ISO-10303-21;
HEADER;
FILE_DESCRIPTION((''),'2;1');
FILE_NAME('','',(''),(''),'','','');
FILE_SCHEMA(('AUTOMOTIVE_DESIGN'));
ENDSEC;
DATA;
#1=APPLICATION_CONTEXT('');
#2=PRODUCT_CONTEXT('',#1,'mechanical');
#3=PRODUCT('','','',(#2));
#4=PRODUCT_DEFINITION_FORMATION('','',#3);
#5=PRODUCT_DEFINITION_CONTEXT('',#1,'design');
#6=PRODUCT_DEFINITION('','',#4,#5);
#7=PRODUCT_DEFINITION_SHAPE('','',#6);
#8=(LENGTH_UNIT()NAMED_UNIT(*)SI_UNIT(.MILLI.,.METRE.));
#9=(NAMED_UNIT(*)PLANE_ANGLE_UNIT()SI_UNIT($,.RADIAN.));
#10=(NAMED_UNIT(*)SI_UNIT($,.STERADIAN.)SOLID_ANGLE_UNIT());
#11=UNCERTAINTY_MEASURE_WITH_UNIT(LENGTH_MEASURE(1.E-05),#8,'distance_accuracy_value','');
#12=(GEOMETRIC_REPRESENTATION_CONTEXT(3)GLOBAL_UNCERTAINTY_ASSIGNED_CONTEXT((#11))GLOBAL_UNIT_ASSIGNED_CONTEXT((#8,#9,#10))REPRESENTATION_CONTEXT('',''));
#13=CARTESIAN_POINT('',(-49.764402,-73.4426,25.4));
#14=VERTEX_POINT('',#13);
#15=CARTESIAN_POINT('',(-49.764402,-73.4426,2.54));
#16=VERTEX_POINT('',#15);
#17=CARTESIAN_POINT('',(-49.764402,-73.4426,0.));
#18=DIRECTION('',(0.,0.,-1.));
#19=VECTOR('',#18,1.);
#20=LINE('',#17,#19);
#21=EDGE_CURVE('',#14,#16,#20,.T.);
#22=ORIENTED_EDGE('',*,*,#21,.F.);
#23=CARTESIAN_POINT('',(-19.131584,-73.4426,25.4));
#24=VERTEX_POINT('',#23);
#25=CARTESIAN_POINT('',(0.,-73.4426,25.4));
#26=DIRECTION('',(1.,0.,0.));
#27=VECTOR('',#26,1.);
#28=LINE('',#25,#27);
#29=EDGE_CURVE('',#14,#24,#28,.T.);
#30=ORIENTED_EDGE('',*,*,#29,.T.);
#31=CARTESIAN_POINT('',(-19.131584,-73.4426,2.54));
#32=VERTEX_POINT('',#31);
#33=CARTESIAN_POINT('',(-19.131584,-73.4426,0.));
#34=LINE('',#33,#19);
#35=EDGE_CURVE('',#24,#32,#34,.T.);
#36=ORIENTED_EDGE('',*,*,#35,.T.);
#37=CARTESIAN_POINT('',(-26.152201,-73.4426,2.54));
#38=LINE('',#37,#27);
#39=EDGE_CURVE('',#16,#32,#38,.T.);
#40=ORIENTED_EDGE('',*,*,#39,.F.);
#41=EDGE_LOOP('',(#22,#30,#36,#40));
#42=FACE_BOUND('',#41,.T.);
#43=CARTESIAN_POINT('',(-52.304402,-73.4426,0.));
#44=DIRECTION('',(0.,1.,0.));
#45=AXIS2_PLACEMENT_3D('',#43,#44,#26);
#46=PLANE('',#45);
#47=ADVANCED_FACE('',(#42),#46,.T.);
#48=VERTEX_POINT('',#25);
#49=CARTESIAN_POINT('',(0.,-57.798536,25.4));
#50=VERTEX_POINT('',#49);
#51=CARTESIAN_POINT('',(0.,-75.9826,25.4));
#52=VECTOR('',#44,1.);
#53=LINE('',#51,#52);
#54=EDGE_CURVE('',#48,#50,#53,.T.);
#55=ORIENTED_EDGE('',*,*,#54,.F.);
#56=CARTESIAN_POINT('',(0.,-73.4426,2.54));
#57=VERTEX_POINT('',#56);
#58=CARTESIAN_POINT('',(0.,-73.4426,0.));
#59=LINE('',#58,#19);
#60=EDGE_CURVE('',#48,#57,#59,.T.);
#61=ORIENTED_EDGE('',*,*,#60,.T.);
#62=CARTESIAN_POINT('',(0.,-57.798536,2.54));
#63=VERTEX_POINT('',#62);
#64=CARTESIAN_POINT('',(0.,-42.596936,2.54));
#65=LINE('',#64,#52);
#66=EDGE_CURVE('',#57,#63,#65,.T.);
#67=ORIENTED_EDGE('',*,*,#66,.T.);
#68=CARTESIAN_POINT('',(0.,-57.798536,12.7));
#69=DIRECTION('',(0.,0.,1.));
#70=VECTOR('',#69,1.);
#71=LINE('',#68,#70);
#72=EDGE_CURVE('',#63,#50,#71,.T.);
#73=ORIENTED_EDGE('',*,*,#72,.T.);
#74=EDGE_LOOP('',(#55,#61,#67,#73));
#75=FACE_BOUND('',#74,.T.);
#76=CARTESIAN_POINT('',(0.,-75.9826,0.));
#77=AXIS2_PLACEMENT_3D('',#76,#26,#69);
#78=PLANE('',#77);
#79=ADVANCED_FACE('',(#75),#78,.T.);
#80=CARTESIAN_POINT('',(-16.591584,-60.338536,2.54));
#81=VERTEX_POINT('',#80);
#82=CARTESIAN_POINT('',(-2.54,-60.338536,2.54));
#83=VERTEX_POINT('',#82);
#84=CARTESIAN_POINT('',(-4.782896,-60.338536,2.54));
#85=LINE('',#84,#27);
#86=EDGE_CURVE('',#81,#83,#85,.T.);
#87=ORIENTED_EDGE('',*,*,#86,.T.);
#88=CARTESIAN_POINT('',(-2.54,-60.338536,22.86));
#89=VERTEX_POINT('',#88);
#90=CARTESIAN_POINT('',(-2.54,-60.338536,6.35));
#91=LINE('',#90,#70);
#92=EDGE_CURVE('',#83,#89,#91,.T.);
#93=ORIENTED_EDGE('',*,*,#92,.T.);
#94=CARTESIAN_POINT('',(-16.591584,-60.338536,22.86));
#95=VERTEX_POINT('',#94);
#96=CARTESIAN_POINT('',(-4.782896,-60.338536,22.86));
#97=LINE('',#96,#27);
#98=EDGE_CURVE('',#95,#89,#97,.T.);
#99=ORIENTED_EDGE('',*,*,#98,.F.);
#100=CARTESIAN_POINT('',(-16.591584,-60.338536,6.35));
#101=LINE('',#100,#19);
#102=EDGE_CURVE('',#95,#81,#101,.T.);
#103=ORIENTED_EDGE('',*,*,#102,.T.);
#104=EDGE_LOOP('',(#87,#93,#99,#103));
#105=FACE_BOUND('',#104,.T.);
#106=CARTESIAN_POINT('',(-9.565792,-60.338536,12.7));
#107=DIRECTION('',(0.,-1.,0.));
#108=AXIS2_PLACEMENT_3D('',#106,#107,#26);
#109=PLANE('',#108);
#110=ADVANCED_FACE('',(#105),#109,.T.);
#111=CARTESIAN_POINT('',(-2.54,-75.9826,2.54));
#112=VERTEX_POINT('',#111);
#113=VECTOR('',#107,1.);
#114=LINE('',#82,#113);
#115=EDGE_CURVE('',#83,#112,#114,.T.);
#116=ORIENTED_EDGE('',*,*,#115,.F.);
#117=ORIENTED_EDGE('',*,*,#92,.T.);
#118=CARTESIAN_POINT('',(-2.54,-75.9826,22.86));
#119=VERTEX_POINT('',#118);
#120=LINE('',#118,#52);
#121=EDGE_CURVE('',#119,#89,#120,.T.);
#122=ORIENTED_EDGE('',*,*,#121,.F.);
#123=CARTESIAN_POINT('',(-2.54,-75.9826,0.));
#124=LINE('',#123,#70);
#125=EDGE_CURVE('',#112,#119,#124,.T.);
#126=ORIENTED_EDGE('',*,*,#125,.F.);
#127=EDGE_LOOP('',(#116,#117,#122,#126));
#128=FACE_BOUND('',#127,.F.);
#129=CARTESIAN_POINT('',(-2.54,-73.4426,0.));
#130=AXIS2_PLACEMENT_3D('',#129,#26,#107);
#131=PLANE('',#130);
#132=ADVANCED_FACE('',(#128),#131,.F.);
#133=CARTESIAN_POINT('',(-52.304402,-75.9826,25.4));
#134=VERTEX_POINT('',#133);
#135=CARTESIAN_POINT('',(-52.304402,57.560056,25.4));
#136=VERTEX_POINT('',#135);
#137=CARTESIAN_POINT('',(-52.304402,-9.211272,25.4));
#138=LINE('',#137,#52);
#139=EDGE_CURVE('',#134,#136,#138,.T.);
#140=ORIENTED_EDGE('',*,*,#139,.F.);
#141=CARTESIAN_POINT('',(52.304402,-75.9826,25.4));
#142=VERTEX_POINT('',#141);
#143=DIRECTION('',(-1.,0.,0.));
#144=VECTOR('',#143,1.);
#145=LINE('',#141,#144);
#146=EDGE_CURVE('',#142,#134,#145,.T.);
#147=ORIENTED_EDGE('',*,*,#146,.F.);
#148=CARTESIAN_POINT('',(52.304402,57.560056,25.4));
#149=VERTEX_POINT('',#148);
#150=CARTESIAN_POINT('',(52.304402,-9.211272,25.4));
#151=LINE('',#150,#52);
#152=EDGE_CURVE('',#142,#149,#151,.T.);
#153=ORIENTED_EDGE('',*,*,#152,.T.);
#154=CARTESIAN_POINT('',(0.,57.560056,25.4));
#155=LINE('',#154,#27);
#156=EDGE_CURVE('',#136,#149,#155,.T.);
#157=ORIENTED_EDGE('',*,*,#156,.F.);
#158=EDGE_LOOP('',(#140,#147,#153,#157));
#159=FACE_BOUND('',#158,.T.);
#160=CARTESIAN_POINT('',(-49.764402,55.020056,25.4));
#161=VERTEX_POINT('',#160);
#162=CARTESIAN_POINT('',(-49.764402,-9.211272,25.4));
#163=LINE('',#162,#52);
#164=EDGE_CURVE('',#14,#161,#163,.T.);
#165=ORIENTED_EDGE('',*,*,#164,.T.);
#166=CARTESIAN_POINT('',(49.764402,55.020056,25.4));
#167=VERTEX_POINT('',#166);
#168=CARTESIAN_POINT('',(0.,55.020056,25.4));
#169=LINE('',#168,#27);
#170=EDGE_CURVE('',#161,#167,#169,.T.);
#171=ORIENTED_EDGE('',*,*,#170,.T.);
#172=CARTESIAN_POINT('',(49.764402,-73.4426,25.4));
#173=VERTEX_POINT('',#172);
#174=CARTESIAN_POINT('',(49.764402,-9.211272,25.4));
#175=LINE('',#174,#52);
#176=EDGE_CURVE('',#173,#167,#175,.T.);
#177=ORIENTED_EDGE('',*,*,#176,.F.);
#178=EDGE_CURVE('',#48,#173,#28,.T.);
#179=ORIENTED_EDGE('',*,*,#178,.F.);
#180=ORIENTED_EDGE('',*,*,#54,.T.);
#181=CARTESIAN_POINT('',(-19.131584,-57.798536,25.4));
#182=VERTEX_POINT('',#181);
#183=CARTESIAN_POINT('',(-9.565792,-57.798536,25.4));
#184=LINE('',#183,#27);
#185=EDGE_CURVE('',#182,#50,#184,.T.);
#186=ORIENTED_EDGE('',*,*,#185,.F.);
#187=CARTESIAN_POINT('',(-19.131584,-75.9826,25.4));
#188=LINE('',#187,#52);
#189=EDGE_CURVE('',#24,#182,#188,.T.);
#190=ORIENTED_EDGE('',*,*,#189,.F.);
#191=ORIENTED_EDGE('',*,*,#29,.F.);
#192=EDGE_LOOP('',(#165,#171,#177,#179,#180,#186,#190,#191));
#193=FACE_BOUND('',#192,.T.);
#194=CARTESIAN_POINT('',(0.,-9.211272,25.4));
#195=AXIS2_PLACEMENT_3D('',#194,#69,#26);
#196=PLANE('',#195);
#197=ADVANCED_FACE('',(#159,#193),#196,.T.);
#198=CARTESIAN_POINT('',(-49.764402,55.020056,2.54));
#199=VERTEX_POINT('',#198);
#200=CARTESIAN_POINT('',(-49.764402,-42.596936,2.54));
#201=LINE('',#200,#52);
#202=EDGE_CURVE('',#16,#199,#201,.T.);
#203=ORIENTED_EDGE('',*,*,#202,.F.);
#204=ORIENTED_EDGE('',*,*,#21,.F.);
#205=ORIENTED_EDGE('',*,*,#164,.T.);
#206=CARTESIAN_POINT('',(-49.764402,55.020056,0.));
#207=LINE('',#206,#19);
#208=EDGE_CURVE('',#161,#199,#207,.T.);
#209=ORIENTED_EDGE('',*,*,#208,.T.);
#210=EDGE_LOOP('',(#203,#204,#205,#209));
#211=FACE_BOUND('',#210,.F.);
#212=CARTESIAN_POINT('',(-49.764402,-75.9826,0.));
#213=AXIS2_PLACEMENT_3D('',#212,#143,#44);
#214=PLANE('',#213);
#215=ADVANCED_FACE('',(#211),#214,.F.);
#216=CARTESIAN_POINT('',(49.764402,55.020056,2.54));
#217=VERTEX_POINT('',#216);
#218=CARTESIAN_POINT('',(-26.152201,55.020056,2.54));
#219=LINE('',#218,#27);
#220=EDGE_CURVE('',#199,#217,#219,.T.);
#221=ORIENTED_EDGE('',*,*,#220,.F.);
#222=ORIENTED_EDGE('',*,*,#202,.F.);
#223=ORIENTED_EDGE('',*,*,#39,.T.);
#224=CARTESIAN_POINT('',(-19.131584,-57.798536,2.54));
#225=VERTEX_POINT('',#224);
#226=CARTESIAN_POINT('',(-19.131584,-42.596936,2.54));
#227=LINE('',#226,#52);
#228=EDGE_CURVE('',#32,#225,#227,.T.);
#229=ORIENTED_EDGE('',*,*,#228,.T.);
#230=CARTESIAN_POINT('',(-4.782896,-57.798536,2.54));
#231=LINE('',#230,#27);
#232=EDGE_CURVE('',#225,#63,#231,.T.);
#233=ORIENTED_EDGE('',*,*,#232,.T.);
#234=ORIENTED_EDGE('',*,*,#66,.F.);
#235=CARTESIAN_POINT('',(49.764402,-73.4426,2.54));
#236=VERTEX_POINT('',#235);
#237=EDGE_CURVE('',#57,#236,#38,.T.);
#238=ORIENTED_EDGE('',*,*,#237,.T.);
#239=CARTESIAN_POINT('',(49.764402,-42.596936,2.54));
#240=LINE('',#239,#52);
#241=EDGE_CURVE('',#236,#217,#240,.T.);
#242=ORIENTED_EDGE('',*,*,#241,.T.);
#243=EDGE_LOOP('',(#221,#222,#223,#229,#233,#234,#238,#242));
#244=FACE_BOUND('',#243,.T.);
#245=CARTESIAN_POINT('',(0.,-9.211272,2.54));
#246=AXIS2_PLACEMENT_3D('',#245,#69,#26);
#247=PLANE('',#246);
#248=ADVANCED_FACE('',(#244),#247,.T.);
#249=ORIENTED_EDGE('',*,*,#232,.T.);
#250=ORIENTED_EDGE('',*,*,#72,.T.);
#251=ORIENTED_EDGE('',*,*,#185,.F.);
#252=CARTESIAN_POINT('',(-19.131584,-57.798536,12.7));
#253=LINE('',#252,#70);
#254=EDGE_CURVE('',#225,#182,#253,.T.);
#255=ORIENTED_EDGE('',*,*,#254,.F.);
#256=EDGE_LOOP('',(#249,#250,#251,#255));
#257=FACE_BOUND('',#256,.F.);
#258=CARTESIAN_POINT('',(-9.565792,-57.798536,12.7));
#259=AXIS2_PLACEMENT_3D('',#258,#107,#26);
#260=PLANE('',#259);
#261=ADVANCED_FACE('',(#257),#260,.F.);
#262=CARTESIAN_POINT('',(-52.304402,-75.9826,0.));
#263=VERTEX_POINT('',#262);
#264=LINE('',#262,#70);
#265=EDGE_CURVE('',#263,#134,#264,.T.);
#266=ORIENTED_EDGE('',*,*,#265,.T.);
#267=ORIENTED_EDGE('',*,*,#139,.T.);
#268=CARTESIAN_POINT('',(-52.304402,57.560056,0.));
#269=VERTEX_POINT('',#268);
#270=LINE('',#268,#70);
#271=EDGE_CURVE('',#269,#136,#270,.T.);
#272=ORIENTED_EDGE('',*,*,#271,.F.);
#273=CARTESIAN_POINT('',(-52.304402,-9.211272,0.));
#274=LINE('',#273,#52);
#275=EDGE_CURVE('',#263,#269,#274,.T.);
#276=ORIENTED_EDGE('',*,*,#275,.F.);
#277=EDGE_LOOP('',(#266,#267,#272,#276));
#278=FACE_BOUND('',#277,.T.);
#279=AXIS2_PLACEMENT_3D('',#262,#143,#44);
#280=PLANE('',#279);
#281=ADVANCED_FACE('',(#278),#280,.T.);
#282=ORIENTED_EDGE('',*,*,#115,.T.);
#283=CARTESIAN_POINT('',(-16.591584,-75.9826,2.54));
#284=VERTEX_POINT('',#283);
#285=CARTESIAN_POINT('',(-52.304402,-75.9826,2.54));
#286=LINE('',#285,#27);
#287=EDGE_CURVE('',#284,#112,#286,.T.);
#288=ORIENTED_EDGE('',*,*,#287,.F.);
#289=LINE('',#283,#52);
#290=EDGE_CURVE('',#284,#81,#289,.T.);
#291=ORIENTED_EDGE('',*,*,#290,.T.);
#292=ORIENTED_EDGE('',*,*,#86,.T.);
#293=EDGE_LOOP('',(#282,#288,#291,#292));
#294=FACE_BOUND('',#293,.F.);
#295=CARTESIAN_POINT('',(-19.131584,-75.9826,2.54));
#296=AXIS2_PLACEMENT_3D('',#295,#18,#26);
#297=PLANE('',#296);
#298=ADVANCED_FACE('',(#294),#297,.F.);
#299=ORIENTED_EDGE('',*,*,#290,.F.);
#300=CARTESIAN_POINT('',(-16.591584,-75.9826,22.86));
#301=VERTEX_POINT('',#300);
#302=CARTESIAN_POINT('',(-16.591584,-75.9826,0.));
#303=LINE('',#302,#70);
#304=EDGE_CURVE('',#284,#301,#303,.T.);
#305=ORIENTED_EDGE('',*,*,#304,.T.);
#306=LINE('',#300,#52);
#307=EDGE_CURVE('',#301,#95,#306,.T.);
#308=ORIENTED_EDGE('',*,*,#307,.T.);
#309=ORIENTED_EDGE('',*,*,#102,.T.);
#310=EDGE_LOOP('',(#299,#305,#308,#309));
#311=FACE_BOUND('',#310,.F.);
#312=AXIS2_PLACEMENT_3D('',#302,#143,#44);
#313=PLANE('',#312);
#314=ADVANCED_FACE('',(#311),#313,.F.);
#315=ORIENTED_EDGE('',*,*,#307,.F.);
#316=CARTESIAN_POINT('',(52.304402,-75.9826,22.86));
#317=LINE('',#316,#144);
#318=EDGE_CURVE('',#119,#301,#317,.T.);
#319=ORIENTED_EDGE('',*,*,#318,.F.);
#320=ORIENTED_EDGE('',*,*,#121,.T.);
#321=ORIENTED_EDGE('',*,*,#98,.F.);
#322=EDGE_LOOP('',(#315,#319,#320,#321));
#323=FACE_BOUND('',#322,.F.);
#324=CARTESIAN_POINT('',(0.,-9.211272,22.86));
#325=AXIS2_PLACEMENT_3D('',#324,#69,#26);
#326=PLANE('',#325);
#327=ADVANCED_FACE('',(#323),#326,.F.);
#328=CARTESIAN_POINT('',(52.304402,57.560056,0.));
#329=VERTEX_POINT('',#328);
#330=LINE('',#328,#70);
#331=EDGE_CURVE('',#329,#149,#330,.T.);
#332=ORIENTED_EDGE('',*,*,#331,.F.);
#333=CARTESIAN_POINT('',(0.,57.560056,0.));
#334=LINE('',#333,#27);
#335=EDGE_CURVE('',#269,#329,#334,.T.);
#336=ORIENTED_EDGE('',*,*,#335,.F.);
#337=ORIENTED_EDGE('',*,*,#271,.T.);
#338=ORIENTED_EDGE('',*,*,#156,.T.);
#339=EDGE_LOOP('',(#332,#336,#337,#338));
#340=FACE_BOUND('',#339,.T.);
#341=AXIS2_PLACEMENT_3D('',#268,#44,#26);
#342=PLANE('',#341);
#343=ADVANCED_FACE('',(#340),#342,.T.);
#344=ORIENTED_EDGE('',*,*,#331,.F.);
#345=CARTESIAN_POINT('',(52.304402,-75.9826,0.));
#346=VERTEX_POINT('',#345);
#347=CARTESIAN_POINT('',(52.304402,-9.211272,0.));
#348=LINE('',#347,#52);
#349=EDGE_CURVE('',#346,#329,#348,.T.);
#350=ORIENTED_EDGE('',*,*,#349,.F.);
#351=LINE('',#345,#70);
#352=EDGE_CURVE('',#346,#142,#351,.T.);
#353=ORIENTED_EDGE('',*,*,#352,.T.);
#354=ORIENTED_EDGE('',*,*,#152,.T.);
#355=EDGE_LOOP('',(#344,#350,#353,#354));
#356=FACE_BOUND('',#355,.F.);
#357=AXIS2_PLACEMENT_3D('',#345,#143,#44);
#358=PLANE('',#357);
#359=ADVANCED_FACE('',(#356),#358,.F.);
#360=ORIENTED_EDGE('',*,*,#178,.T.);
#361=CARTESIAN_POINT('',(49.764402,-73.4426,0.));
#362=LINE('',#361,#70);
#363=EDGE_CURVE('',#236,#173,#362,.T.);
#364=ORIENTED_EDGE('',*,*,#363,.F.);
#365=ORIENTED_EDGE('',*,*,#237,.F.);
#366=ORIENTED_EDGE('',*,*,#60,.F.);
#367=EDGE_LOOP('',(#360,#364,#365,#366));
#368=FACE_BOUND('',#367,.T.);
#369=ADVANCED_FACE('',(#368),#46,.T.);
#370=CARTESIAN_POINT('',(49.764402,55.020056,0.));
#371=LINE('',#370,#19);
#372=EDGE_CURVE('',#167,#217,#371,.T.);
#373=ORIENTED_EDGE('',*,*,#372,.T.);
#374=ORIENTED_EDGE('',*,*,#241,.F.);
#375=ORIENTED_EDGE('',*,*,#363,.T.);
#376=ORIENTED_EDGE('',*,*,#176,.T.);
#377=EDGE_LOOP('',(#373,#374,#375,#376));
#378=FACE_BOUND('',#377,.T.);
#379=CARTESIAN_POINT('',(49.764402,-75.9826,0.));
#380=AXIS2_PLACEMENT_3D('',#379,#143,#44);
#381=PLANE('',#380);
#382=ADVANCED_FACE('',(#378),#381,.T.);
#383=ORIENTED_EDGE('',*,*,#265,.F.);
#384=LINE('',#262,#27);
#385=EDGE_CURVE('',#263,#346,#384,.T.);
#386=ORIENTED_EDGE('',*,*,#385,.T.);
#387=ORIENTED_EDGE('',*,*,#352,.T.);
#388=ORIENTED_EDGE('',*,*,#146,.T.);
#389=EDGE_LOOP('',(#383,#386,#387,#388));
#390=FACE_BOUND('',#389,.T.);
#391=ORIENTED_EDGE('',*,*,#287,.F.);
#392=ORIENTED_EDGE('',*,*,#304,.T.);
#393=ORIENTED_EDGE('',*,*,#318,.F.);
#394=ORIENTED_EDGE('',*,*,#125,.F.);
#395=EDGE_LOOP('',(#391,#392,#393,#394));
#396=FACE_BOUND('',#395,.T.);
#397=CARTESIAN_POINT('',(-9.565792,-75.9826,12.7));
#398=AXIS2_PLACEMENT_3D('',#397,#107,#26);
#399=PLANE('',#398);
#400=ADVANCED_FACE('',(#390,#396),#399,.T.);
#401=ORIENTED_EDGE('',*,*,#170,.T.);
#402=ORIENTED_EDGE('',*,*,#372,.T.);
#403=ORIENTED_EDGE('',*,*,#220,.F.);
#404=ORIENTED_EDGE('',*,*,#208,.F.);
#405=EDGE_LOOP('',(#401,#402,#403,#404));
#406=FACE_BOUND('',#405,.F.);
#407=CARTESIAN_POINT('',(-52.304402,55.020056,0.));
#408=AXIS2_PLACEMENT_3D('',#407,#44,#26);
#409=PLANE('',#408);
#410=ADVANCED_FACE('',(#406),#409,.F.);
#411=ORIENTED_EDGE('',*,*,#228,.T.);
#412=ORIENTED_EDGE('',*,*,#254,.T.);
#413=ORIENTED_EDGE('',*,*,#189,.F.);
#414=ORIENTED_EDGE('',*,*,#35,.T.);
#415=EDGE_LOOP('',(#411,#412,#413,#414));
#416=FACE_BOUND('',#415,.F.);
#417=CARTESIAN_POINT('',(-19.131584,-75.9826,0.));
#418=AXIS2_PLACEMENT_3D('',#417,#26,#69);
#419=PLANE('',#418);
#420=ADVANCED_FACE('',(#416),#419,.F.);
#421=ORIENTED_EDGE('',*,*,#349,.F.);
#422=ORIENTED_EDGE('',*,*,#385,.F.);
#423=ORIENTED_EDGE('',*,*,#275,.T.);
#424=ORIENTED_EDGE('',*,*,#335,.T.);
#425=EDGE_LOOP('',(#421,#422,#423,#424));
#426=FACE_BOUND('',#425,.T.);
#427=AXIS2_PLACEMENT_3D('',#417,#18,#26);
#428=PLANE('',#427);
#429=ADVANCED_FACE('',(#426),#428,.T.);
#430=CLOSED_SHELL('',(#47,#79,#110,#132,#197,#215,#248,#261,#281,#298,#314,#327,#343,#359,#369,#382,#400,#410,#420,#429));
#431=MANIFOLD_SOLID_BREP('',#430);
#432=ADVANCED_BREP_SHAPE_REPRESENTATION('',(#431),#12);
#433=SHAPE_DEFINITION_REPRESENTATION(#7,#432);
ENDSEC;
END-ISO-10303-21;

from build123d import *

# Parameters (mm, degrees)
F0_W         = 104.6088039875
F0_H         = 133.5426568985
F1_DEPTH     = 25.4
F2_T         = -2.54
F3_W         = 19.131584093
F3_H         = 25.4
F4_DEPTH     = 18.1840639561
F5_T         = 2.54
F5_T3_DEPTH  = 27.94
F5_T5_DEPTH  = 133.5426568985
F5_T7_DEPTH  = 104.6088039875
F5_T9_DEPTH  = 54.8444019938
F5_T11_DEPTH = 20.7240639561
F5_T13_DEPTH = 24.211584093
F5_T15_DEPTH = 35.7128179008


# Not quite as in the source:
# - a shell that OpenCascade refuses in one call is made with other operations: the cavity is built on its own and cut out


with BuildPart() as f1:
    # F0 (on Top) → F1 (new body)
    with BuildSketch(Plane.XY):
        with Locations((0, -9.2112720013)):
            Rectangle(F0_W, F0_H)
    extrude(amount=F1_DEPTH)

    # F2
    f2_openings = [f1.faces().sort_by_distance(p)[0] for p in [
        (0, -9.211272, 25.4),
    ]]
    offset(amount=F2_T, openings=f2_openings)

    # F3 (on face) → F4 (join)
    with BuildSketch(Plane.XZ.offset(75.9826004505)):
        with Locations((-9.5657920465, 12.7)):
            Rectangle(F3_W, F3_H)
    extrude(amount=-F4_DEPTH)

    # F5: shell of thickness 2.54, made by hand


with BuildPart() as f5_core1:
    # F5_t2: copy of F1
    add(f1.part)

    # the walls: a layer under each face that stays
    f5_faces = [f5_core1.faces().sort_by_distance(p)[0] for p in [
        (52.3044019938, -9.2112720013, 12.7),
        (-14.9441148554, -66.4438392435, 25.4),
        (49.7644019938, -9.2112720013, 13.97),
        (0, -9.2112720013, 2.54),
        (0, 55.020056448, 13.97),
        (-49.7644019938, -9.2112720013, 13.97),
        (-34.4479930434, -73.4426004505, 13.97),
        (-19.131584093, -65.6205684724, 13.97),
        (-9.5657920465, -57.7985364944, 13.97),
        (0, -65.6205684724, 13.97),
        (24.8822009969, -73.4426004505, 13.97),
        (-52.3044019938, -9.2112720013, 12.7),
        (0, -9.2112720013, 0),
        (0, 57.560056448, 12.7),
    ]]
    thicken(f5_faces, amount=-F5_T, mode=Mode.SUBTRACT)

    # F5_s4 → F5_t3 (cut)
    with BuildSketch(Plane.XY):
        Polygon((49.7390019938, 54.994656448), (52.3044019938, 55.020056448), (52.3044019938, 57.560056448), (49.7644019938, 57.560056448), align=None)
        Polygon((49.7390019938, -73.4172004505), (52.3044019938, -73.4426004505), (52.3044019938, -75.9826004505), (49.7644019938, -75.9826004505), align=None)
        Polygon((-49.7390019938, 54.994656448), (-49.7644019938, 57.560056448), (-52.3044019938, 57.560056448), (-52.3044019938, 55.020056448), align=None)
        Polygon((-49.7390019938, -73.4172004505), (-52.3044019938, -73.4426004505), (-52.3044019938, -75.9826004505), (-49.7644019938, -75.9826004505), align=None)
        Polygon((-19.156984093, -73.4172004505), (-19.131584093, -75.9826004505), (-16.591584093, -75.9826004505), (-16.591584093, -73.4426004505), align=None)
        Polygon((0.0254, -73.4172004505), (-2.54, -73.4426004505), (-2.54, -75.9826004505), (0, -75.9826004505), align=None)
    extrude(amount=F5_T3_DEPTH, mode=Mode.SUBTRACT)

    # F5_s6 → F5_t5 (cut)
    with BuildSketch(Plane.XZ.offset(-57.560056448)):
        Polygon((49.7390019938, 2.5654), (52.3044019938, 2.54), (52.3044019938, 0), (49.7644019938, 0), align=None)
        Polygon((-49.7390019938, 2.5654), (-49.7644019938, 0), (-52.3044019938, 0), (-52.3044019938, 2.54), align=None)
    extrude(amount=F5_T5_DEPTH, mode=Mode.SUBTRACT)

    # F5_s8 → F5_t7 (cut)
    with BuildSketch(Plane.YZ.offset(-52.3044019938)):
        Polygon((54.994656448, 2.5654), (55.020056448, 0), (57.560056448, 0), (57.560056448, 2.54), align=None)
    extrude(amount=F5_T7_DEPTH, mode=Mode.SUBTRACT)

    # F5_s10 → F5_t9 (cut)
    with BuildSketch(Plane.YZ.offset(-2.54)):
        Polygon((-73.4172004505, 2.5654), (-73.4426004505, 0), (-75.9826004505, 0), (-75.9826004505, 2.54), align=None)
    extrude(amount=F5_T9_DEPTH, mode=Mode.SUBTRACT)

    # F5_s12 → F5_t11 (cut)
    with BuildSketch(Plane.XZ.offset(55.2585364944)):
        Polygon((0.0254, 2.5654), (0, 0), (-2.54, 0), (-2.54, 2.54), align=None)
        Polygon((-19.156984093, 2.5654), (-19.131584093, 0), (-16.591584093, 0), (-16.591584093, 2.54), align=None)
    extrude(amount=F5_T11_DEPTH, mode=Mode.SUBTRACT)

    # F5_s14 → F5_t13 (cut)
    with BuildSketch(Plane.YZ.offset(-21.671584093)):
        Polygon((-57.7731364944, 2.5654), (-57.7985364944, 0), (-60.3385364944, 0), (-60.3385364944, 2.54), align=None)
    extrude(amount=F5_T13_DEPTH, mode=Mode.SUBTRACT)

    # F5_s16 → F5_t15 (cut)
    with BuildSketch(Plane.YZ.offset(-52.3044019938)):
        Polygon((-73.4172004505, 2.5654), (-73.4426004505, 0), (-75.9826004505, 0), (-75.9826004505, 2.54), align=None)
    extrude(amount=F5_T15_DEPTH, mode=Mode.SUBTRACT)


with BuildPart() as f1_1:
    add(f1.part)

    # what is left inside the walls is the cavity
    f5_cavity = [f5_core1.part.solids().sort_by_distance(p)[0] for p in [
        (-2.5654, -65.553224, 12.7),
    ]]
    add(f5_cavity, mode=Mode.SUBTRACT)


solid = f1_1.part
